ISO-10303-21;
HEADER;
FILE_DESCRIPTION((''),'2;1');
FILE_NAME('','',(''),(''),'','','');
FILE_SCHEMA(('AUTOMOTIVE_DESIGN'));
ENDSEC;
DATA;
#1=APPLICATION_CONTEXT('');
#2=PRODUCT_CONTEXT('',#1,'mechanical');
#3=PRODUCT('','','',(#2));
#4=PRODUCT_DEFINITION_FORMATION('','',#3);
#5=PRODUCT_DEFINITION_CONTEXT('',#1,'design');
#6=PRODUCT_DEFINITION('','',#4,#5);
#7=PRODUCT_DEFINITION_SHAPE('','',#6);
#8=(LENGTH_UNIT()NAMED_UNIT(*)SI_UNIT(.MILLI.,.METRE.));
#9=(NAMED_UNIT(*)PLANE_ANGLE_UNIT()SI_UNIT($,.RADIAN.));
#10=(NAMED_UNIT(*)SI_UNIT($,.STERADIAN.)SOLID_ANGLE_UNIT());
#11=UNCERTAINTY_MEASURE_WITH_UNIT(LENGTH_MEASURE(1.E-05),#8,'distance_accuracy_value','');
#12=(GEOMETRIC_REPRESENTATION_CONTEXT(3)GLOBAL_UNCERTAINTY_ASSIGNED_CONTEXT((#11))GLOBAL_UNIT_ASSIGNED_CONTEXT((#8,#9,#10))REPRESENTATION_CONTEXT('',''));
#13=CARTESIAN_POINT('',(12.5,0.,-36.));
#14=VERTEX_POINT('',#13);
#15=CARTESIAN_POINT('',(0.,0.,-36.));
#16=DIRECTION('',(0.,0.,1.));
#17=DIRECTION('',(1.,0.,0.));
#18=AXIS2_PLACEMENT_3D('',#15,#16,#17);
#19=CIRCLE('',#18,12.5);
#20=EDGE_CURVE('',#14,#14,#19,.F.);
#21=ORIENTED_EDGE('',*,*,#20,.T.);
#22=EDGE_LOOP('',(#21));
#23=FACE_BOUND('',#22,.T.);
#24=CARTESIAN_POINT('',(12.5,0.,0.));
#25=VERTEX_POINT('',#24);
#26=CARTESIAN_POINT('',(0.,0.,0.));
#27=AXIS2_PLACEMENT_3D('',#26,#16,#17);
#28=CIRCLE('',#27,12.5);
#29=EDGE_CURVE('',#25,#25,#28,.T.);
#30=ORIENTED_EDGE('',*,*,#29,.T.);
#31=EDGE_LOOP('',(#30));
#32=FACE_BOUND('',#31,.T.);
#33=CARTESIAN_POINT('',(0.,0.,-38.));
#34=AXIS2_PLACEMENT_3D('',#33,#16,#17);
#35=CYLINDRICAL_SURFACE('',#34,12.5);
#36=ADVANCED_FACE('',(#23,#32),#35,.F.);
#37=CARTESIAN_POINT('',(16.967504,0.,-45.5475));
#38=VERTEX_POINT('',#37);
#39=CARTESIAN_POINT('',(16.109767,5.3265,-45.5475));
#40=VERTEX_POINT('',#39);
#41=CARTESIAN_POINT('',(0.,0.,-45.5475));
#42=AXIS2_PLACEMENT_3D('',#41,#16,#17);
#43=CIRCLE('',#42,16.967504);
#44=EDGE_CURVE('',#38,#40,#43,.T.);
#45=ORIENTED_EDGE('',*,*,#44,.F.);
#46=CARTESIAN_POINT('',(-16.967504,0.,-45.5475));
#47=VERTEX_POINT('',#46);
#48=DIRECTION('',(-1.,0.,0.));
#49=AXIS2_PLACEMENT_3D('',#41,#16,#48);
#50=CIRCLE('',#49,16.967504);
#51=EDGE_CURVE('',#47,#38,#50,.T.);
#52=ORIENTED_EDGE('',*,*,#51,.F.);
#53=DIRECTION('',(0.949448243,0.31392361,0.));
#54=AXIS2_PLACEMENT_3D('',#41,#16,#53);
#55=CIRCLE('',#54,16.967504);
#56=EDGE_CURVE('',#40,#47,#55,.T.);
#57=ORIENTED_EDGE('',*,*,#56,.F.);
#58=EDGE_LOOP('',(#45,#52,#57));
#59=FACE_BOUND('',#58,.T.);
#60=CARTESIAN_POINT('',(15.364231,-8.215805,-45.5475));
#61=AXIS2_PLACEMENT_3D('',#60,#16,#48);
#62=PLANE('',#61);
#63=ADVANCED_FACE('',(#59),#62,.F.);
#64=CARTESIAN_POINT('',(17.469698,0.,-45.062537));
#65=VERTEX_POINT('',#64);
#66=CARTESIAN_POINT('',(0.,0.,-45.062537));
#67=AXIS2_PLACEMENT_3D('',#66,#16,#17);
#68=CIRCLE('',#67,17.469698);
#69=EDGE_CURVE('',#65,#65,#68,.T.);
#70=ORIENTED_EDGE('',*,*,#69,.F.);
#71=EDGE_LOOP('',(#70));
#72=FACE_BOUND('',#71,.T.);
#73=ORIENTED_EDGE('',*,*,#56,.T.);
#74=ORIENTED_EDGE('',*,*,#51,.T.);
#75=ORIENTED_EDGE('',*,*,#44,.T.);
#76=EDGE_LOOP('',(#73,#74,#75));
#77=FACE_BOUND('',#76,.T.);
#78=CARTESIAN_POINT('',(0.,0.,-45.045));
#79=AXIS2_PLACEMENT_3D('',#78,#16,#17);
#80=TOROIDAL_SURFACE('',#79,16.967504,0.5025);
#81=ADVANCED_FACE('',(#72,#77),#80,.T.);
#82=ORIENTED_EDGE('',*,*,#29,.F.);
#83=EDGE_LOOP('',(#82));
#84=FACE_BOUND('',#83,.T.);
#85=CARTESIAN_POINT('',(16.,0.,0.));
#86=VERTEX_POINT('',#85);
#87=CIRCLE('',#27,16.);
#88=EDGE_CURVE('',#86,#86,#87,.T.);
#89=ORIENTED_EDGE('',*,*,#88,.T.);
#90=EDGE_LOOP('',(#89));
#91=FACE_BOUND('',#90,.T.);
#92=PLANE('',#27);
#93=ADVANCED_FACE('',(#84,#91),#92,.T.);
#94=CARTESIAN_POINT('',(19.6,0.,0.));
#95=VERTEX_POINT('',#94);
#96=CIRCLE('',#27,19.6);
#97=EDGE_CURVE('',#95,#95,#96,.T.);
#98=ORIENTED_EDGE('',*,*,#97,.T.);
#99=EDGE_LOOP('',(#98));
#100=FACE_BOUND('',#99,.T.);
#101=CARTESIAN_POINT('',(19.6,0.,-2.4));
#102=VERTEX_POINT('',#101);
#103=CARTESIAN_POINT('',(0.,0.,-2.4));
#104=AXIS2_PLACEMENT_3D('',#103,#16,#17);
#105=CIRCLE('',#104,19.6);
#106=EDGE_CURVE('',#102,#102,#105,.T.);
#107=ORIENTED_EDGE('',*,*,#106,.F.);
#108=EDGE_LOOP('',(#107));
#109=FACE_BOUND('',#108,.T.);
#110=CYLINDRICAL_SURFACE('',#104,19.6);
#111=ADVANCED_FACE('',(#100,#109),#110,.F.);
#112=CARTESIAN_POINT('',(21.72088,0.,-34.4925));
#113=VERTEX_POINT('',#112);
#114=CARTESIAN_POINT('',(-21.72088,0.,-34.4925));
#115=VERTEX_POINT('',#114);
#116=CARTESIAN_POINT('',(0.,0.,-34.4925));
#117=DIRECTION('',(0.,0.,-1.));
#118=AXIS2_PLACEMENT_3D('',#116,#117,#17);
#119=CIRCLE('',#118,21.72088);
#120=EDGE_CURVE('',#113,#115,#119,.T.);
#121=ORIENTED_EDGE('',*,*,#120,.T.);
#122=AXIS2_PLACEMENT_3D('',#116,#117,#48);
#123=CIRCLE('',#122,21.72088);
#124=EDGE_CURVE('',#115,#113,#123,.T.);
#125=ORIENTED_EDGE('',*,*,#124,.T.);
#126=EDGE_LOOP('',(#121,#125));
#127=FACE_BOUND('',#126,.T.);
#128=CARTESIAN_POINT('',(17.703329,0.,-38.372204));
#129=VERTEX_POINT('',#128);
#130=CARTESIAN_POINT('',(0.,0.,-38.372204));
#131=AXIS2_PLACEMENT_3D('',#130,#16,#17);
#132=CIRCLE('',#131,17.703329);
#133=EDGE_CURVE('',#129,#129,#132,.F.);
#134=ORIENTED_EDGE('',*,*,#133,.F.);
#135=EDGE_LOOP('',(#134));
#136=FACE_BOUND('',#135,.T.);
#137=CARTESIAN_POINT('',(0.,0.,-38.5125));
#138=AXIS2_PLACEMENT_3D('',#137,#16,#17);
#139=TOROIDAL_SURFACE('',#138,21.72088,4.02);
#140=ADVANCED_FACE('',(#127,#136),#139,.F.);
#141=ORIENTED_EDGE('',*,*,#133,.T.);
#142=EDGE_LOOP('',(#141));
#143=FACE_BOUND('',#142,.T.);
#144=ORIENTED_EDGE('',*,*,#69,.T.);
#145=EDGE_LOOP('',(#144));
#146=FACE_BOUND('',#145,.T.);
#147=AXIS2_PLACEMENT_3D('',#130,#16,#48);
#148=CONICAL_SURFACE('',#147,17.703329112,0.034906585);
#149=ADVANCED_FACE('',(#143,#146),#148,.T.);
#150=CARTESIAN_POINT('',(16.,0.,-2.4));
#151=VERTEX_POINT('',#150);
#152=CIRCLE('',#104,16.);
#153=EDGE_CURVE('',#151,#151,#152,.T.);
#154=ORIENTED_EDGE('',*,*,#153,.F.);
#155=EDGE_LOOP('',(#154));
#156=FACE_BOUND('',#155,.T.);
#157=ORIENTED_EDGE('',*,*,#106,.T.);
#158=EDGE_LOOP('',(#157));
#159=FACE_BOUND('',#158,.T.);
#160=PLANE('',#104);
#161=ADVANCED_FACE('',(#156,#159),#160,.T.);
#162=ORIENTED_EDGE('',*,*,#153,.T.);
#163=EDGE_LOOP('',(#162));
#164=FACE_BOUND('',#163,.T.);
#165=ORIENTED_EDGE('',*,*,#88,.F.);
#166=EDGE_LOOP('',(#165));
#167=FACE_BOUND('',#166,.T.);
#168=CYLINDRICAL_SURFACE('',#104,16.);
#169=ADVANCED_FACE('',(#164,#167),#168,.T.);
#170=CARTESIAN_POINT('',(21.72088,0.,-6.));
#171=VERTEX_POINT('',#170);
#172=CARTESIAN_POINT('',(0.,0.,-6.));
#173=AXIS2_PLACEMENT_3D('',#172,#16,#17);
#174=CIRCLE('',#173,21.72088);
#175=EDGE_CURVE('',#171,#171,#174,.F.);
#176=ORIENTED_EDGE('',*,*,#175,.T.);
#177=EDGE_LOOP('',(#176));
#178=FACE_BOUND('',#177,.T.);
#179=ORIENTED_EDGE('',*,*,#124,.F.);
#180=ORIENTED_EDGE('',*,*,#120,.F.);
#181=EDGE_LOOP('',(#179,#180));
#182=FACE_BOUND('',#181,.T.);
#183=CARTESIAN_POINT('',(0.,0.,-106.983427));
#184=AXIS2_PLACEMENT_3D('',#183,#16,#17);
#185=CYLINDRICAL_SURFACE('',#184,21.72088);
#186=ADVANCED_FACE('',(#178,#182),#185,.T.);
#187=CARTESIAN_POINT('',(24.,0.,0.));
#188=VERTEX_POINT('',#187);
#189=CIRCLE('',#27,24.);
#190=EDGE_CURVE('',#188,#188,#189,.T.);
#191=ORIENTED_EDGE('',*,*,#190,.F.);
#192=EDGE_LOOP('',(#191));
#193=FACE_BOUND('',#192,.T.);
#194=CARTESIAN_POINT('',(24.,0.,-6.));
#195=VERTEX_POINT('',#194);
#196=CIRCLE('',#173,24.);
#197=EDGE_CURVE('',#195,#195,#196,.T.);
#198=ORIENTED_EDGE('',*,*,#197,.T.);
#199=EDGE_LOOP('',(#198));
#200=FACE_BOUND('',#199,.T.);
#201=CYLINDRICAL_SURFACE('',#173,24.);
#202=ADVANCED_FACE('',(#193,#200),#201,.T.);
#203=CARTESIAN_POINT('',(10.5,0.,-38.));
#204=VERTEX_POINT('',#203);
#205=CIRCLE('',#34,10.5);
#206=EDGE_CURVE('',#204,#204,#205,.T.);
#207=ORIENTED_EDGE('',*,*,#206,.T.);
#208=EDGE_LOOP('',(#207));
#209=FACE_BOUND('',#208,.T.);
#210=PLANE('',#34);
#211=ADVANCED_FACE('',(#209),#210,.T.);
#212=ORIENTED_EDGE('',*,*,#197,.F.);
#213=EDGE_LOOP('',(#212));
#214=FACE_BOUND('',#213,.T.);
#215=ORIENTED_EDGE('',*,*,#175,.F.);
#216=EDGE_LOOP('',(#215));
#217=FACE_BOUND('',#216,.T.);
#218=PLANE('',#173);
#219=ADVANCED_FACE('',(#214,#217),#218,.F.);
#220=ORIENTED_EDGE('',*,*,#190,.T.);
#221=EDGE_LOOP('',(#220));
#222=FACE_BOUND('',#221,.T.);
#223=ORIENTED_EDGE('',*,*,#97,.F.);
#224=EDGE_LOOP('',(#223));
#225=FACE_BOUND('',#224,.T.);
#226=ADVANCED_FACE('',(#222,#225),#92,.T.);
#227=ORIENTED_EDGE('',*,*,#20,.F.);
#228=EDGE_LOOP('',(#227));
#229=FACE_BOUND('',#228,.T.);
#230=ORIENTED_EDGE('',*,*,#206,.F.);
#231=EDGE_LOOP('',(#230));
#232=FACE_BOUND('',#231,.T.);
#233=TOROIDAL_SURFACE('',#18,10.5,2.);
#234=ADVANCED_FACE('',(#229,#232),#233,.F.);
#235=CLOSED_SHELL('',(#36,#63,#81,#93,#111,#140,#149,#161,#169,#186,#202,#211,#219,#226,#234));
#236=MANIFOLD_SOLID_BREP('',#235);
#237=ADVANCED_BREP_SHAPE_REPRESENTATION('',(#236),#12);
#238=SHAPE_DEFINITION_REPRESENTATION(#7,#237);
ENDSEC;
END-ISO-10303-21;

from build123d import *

# Parameters (mm, degrees)
SKETCH1_R      = 21.720880237
EXTRUDE1_DEPTH = 45.5475
SKETCH2_R      = 24
EXTRUDE2_DEPTH = 6
SKETCH3_R      = 12.5
EXTRUDE3_DEPTH = 38
SKETCH4_R      = 19.6
SKETCH4_R_2    = 16
EXTRUDE4_DEPTH = 2.4
FILLET1_R      = 2


# Read off the part's stored shape, not the designer's step: Cavity1
with BuildPart() as part:
    # Sketch1 → Extrude1 (new body)
    with BuildSketch(Plane.XY):
        Circle(SKETCH1_R)
    extrude(amount=-EXTRUDE1_DEPTH)

    # Cavity1 outline → Cavity1 (revolve, cut)
    with BuildSketch(Plane.XZ):
        with BuildLine():
            Line((21.720880237, -45.5475), (21.720880237, -34.4925))
            ThreePointArc((21.720880237, -34.4925), (18.928353588, -35.620754002), (17.703329112, -38.372204023))
            Line((17.703329112, -38.372204023), (17.469697537, -45.062536997))
            ThreePointArc((17.469697537, -45.062536997), (17.316569477, -45.406468249), (16.967503646, -45.5475))
            Line((16.967503646, -45.5475), (21.720880237, -45.5475))
        make_face()
    revolve(axis=Axis((0, 0, 0), (5.33833708127146e-12, -2.69575334284611e-12, 1.0)), mode=Mode.SUBTRACT)

    # Sketch2 → Extrude2 (add)
    with BuildSketch(Plane.XY):
        Circle(SKETCH2_R)
    extrude(amount=-EXTRUDE2_DEPTH)

    # Sketch3 → Extrude3 (cut)
    with BuildSketch(Plane.XY):
        Circle(SKETCH3_R)
    extrude(amount=-EXTRUDE3_DEPTH, mode=Mode.SUBTRACT)

    # Sketch4 → Extrude4 (cut)
    with BuildSketch(Plane.XY):
        Circle(SKETCH4_R)
        Circle(SKETCH4_R_2, mode=Mode.SUBTRACT)
    extrude(amount=-EXTRUDE4_DEPTH, mode=Mode.SUBTRACT)

    # Fillet1
    fillet1_edges = [part.edges().sort_by_distance(p)[0] for p in [
        (-12.5, 0, -38),
    ]]
    fillet(fillet1_edges, radius=FILLET1_R)


solid = part.part
